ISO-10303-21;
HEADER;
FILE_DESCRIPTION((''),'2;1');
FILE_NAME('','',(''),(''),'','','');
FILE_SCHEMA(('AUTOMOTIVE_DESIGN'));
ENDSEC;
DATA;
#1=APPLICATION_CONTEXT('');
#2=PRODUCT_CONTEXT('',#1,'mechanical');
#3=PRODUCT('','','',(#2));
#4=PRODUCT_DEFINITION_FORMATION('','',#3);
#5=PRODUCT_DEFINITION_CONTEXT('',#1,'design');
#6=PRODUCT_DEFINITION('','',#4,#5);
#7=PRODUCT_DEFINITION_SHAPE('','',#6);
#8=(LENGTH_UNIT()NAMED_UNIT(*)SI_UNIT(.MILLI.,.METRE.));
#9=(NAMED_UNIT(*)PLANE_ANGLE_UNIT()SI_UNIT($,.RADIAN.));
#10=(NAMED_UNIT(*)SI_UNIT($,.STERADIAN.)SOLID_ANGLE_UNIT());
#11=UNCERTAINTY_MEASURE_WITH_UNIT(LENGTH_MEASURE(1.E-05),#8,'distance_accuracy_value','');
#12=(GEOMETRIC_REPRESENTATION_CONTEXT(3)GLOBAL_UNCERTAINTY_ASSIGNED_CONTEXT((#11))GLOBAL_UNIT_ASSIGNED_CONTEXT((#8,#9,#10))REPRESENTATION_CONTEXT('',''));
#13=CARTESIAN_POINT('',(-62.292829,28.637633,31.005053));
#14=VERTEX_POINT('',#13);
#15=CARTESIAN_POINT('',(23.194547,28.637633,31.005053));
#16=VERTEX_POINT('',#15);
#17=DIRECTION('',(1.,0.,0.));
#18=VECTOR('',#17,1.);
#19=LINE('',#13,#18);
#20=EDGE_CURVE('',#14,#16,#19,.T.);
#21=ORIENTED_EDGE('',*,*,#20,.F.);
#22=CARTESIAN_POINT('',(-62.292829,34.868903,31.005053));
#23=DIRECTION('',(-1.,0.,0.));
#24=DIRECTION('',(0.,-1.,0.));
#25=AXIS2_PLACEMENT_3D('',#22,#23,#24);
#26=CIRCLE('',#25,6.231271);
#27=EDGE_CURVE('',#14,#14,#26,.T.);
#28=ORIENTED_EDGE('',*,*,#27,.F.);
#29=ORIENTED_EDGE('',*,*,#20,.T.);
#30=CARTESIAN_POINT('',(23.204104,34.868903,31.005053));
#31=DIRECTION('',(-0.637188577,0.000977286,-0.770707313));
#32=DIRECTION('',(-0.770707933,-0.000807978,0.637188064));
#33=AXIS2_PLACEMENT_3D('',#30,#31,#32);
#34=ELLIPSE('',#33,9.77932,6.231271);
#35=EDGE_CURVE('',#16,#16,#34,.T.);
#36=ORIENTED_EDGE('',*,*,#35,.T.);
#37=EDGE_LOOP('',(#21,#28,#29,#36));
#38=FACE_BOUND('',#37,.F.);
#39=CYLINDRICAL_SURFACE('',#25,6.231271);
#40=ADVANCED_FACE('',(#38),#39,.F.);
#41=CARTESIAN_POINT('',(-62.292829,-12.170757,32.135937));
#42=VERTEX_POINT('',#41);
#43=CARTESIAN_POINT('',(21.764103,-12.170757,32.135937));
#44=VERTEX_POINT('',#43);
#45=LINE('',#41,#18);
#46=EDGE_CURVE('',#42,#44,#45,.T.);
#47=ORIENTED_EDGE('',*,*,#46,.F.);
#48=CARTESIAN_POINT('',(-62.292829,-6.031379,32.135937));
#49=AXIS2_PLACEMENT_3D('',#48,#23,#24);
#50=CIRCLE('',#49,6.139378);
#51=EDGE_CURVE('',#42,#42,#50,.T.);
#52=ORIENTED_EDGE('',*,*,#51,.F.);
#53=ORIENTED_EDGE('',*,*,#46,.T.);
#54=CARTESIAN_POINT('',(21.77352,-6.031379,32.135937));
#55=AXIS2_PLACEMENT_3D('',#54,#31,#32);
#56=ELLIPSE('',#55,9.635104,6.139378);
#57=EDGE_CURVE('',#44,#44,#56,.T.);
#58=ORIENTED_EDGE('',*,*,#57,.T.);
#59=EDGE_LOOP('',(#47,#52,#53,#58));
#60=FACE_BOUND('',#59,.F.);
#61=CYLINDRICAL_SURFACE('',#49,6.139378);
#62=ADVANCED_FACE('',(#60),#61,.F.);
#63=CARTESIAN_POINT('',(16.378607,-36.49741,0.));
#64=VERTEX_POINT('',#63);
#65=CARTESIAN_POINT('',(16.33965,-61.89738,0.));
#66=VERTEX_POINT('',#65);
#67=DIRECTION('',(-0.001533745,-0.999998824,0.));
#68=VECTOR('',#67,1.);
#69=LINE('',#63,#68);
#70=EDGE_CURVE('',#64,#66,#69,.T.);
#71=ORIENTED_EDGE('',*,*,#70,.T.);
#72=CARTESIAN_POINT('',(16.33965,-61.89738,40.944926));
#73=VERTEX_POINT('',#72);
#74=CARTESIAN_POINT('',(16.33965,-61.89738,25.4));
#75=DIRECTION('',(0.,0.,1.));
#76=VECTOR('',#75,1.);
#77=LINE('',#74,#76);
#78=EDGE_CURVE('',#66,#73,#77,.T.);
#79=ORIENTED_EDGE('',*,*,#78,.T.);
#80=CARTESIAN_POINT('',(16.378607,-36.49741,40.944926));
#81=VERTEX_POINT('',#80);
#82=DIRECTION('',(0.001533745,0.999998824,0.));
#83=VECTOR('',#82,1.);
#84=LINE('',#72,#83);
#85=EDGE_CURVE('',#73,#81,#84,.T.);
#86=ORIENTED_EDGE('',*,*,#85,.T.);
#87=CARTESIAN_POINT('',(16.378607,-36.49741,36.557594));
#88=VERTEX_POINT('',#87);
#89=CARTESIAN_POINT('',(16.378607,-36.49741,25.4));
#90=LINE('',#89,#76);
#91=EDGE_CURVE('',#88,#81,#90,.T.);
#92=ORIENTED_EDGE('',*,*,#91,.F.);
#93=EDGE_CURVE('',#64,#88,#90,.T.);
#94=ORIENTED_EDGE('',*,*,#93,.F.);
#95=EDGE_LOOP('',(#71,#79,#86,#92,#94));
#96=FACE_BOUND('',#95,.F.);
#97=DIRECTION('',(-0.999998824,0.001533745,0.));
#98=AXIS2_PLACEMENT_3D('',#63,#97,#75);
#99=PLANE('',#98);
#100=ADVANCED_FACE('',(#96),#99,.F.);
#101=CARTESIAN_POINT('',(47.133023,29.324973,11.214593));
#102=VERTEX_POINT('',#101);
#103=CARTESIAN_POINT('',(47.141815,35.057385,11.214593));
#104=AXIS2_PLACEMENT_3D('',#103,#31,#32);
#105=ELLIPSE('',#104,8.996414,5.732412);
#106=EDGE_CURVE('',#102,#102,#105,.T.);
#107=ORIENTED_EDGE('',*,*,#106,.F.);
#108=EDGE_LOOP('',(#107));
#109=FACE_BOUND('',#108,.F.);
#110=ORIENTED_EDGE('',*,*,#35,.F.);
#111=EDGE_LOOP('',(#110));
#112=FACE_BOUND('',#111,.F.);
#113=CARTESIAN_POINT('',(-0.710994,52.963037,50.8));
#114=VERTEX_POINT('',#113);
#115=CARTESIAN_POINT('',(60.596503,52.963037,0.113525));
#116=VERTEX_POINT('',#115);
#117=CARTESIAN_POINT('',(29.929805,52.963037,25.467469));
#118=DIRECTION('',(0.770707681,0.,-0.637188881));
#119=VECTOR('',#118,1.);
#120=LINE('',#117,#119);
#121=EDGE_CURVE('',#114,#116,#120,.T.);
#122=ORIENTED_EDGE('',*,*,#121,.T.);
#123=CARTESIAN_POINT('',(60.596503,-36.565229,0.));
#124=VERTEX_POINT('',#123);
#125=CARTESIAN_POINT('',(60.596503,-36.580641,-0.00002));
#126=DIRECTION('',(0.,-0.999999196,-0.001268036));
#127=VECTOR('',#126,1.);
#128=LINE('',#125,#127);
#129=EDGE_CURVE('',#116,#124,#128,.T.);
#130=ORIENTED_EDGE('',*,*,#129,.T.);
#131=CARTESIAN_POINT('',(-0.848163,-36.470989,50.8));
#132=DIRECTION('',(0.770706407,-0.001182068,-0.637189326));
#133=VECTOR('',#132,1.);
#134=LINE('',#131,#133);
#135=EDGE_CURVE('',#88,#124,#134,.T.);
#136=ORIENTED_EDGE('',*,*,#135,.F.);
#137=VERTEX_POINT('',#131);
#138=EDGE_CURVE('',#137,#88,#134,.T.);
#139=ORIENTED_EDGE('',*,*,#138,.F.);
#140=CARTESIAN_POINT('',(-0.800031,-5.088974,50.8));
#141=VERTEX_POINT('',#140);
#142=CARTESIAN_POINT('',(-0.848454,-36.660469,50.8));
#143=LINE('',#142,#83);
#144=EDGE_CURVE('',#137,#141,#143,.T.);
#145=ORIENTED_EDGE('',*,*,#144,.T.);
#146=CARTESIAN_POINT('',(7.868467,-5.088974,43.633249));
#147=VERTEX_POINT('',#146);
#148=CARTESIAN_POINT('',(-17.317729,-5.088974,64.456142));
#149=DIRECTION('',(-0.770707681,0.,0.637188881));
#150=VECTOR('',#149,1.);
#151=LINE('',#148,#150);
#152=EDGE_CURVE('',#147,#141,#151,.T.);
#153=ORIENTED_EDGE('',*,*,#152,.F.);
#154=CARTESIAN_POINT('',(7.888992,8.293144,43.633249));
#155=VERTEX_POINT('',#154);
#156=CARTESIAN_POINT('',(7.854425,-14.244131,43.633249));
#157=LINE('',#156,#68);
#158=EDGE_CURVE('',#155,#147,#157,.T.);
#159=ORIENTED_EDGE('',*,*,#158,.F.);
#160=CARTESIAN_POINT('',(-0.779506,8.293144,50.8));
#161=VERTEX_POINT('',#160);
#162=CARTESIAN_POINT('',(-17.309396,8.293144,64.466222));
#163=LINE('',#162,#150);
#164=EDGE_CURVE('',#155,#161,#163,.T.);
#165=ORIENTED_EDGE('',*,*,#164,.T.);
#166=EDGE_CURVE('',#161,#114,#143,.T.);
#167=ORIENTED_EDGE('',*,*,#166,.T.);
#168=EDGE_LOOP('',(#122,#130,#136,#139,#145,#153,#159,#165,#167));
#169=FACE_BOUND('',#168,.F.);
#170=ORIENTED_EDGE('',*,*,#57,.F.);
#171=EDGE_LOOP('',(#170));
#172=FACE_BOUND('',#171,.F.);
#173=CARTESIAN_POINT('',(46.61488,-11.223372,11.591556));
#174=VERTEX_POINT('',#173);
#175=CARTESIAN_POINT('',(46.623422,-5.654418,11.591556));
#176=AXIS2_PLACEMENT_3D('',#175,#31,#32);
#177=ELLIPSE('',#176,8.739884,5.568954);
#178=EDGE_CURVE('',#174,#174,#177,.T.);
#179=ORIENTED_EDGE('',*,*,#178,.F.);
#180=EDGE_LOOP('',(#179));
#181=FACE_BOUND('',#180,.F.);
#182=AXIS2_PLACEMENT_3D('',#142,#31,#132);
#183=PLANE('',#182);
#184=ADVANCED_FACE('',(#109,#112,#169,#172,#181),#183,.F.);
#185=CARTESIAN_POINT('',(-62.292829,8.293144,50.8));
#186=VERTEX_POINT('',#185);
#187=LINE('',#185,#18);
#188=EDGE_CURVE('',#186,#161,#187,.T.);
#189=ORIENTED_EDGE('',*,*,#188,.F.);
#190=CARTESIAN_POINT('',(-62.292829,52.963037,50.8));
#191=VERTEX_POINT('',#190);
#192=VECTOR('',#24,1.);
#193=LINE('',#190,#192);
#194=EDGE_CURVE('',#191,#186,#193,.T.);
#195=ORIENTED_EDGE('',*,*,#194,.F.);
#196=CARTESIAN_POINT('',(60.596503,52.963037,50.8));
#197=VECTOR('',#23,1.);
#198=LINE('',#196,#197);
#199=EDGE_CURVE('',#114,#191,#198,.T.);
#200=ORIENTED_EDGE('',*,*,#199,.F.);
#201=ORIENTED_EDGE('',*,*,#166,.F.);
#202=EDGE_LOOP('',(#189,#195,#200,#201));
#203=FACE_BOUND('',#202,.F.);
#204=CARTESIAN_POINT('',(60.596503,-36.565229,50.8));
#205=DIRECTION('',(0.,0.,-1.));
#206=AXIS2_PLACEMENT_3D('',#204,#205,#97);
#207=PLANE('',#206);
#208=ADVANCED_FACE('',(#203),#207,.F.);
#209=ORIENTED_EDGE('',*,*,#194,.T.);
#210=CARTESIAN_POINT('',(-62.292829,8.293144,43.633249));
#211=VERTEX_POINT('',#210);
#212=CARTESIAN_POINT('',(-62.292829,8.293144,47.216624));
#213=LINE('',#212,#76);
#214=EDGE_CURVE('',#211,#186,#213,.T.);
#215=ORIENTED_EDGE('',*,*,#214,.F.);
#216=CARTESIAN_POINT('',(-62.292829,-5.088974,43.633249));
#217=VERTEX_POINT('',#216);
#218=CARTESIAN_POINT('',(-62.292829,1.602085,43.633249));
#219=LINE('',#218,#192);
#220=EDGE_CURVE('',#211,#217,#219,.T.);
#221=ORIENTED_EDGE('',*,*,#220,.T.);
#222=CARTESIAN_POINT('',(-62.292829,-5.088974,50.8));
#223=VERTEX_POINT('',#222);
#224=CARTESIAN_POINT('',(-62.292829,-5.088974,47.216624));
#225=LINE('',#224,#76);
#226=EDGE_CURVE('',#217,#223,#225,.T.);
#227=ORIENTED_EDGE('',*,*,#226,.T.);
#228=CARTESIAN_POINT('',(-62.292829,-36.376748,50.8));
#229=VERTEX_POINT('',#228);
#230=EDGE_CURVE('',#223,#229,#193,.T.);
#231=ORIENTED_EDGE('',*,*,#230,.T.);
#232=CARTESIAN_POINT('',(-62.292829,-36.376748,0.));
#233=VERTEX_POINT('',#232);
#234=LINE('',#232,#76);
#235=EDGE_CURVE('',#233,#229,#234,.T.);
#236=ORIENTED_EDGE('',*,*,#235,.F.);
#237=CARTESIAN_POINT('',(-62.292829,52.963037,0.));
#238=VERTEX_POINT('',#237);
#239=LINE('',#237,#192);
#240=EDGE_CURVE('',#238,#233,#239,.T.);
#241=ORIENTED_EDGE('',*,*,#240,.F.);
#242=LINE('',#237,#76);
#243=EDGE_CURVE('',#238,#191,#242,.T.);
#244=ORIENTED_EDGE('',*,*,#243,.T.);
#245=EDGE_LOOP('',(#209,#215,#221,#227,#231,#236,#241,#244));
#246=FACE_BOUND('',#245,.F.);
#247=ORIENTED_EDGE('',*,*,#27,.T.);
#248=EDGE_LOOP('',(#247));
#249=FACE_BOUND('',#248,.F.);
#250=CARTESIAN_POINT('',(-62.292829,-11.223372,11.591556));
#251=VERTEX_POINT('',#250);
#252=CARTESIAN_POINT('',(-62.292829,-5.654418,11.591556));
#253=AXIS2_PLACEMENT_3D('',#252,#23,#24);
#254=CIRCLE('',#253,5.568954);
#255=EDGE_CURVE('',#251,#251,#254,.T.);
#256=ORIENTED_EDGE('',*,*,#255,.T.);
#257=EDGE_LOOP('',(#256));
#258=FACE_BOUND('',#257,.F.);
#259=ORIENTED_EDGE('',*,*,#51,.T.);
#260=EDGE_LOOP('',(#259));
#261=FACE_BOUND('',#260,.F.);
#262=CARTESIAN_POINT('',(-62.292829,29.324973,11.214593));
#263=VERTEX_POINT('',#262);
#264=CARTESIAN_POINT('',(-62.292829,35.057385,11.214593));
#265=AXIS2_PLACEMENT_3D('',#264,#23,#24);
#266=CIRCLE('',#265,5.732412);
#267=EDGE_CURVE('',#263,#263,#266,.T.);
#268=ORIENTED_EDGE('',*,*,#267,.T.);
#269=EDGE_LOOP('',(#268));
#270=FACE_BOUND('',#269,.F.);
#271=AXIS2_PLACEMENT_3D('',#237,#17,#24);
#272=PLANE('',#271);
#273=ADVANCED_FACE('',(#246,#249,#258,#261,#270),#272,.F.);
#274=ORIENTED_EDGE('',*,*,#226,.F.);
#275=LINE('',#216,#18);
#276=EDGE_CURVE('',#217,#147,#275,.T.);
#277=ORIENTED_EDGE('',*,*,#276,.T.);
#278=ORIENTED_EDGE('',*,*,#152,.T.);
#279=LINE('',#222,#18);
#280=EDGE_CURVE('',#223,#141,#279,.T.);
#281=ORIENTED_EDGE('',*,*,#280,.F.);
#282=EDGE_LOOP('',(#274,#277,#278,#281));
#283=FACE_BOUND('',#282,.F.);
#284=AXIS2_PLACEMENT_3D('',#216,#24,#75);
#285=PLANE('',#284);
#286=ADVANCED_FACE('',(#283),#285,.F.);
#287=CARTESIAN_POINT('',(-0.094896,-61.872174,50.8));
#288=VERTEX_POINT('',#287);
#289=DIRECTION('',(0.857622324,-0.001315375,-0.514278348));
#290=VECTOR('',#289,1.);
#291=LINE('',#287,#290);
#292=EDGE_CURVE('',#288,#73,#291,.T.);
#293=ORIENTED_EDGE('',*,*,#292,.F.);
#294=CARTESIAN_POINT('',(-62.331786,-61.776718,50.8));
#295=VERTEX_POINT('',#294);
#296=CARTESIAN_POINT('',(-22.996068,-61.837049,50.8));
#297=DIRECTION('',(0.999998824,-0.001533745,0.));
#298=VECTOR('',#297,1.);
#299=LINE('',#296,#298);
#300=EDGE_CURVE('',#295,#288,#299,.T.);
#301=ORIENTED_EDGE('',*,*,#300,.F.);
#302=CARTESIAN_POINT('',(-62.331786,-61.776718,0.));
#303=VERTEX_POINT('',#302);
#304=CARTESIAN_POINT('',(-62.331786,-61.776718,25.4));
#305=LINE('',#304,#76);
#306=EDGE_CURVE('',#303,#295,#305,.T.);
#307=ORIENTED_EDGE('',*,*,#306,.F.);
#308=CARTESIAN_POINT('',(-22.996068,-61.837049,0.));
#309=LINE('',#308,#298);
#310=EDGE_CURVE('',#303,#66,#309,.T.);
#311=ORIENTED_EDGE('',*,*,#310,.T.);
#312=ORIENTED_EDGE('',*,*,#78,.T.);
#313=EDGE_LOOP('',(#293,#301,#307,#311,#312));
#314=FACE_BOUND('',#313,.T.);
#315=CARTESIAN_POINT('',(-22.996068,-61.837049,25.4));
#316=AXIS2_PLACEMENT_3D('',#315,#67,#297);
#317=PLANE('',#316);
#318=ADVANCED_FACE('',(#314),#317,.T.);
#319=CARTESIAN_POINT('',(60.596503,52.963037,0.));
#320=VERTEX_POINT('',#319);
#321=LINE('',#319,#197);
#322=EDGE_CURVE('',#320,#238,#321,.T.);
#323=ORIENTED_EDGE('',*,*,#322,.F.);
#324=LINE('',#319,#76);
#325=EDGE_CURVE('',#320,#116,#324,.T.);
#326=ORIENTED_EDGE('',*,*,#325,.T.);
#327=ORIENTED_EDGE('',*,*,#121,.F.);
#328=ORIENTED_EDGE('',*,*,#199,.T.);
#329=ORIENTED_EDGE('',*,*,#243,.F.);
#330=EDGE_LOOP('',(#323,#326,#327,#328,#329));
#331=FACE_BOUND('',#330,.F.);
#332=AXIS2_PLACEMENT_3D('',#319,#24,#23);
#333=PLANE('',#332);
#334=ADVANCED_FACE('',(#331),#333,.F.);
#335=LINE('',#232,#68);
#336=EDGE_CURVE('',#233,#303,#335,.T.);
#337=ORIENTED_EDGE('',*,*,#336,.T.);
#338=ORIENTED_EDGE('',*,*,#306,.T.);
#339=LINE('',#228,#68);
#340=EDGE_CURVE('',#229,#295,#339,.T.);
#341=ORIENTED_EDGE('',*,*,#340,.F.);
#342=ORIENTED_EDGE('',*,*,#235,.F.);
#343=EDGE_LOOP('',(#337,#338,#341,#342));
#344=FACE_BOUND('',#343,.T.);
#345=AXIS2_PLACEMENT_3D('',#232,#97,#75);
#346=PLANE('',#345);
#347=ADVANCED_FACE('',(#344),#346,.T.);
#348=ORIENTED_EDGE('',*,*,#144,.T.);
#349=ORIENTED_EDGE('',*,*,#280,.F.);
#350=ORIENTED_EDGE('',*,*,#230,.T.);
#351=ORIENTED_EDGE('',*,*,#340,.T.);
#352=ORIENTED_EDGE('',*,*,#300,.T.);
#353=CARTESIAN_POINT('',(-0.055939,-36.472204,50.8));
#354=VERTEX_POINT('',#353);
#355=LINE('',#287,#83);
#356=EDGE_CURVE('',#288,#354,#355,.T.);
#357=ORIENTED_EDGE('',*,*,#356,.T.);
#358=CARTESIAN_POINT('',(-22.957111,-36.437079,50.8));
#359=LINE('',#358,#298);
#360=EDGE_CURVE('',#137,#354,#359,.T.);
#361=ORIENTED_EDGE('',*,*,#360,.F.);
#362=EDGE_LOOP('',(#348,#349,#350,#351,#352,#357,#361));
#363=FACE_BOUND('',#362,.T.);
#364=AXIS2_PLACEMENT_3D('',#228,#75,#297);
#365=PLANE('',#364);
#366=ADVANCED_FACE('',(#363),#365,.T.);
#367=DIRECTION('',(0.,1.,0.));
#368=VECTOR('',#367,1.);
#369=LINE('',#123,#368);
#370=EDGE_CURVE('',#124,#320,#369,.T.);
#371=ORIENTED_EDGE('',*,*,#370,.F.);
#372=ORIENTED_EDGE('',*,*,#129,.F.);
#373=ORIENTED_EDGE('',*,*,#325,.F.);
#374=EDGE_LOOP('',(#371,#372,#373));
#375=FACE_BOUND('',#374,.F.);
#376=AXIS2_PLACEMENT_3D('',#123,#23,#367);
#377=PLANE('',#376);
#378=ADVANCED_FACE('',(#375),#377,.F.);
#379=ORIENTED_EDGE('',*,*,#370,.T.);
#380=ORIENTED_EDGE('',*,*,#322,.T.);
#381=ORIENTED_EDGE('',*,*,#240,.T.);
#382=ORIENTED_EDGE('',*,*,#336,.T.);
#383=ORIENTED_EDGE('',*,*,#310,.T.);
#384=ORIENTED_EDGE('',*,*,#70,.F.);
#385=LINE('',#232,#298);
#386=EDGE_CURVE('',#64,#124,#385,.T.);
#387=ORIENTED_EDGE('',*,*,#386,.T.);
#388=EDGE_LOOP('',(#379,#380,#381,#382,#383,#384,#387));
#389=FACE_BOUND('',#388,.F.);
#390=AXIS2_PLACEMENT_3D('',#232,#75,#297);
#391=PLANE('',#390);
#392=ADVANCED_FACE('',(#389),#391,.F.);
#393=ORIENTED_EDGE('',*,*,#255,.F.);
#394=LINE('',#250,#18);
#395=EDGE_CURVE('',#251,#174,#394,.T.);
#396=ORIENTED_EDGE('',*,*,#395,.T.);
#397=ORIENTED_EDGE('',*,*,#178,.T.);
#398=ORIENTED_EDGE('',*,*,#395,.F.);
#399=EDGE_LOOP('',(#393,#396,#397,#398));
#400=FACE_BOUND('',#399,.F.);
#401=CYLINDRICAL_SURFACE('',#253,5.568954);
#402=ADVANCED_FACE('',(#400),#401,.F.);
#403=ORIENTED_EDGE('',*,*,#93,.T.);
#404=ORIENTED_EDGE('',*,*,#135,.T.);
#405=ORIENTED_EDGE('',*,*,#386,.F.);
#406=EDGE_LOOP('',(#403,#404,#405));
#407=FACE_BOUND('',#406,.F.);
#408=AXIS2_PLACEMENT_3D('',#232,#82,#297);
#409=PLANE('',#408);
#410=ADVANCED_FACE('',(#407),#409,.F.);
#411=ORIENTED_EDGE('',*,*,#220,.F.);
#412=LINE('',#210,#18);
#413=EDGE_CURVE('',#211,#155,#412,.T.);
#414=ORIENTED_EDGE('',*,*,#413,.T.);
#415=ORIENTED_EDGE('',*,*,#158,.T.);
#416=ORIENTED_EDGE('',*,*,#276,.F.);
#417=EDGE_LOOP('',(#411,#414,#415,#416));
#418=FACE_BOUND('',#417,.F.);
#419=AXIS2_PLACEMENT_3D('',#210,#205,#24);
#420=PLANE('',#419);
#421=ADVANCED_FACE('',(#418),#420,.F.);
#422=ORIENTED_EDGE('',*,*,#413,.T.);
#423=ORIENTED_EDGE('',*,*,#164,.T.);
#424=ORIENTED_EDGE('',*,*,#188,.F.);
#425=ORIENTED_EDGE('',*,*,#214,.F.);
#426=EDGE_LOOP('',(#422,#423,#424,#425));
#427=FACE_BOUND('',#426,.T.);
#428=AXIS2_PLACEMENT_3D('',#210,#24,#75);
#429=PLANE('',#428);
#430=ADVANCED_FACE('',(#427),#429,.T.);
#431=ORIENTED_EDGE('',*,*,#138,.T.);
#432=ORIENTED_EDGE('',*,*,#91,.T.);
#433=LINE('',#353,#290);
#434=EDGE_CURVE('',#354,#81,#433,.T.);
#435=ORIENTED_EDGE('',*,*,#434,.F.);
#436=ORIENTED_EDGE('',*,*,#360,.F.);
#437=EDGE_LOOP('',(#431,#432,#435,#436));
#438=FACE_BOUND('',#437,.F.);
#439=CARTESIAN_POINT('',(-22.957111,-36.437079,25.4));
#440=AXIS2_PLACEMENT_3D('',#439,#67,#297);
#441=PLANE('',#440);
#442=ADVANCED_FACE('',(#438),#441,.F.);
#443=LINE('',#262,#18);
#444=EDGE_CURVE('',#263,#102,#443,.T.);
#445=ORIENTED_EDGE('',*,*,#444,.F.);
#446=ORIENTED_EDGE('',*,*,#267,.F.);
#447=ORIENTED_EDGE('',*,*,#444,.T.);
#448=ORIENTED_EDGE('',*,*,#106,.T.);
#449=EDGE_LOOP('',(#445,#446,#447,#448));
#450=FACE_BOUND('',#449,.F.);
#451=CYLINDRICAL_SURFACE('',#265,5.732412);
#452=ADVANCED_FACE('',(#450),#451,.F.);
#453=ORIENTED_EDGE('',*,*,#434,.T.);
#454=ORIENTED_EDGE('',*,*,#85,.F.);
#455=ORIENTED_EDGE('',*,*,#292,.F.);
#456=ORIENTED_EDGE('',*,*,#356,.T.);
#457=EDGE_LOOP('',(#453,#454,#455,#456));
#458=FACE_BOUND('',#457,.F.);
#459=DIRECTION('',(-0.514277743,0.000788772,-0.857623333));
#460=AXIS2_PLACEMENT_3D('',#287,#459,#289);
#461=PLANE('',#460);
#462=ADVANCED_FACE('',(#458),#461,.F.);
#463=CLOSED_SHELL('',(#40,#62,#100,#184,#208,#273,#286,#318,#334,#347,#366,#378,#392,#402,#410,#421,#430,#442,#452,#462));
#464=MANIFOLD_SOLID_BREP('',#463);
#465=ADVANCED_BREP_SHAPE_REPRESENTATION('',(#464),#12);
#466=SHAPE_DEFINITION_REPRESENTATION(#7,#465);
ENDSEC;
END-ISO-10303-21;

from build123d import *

# Parameters (mm, degrees)
F1_DEPTH  = 50.8
F3_DEPTH  = 0.189480841
F4_DEPTH  = 89.7186418795
F5_W      = 13.382118661
F5_H      = 7.166751343
F6_DEPTH  = 122.8903324733
F7_W      = 78.6715284359
F7_H      = 50.8
F8_DEPTH  = 25.4
F10_DEPTH = 25.4
F11_R     = 6.2312707334
F12_DEPTH = 122.8903324733
F13_R     = 6.1393781486
F14_DEPTH = 122.8903324733
F15_R     = 5.7324119576
F16_DEPTH = 122.8903324733
F17_R     = 5.5689542342
F18_DEPTH = 122.8903324733


with BuildPart() as f1:
    # F0 (on Top) → F1 (new body)
    with BuildSketch(Plane.XY):
        Polygon((-62.2928291559, 52.9630370438), (-62.2928291559, -36.376748234), (60.5965033174, -36.5652292967), (60.5965033174, 52.9630370438), align=None)
    extrude(amount=F1_DEPTH)

    # F2 (on face) → F3 (join, through all)
    with BuildSketch(Plane(origin=(-0.0559391088, -36.4722038357, 0), x_dir=(0.9999988238, -0.0015337445, 0), z_dir=(-0.0015337445, -0.9999988238, 0))):
        Polygon((60.6525137648, 50.8), (-0.7922247423, 50.8), (60.6525137648, 0), align=None)
    extrude(amount=F3_DEPTH)

    # F4 (cut, through all): a face of the model
    f4_faces = [f1.faces().sort_by_distance(p)[0] for p in [
        (40.1146572899, -36.7232964043, 33.8666666667),
    ]]
    extrude(f4_faces, amount=-F4_DEPTH, mode=Mode.SUBTRACT)

    # F5 (on face) → F6 (cut, through all)
    with BuildSketch(Plane(origin=(-62.2928291559, 0, 0), x_dir=(0, -1, 0), z_dir=(-1, 0, 0))):
        with Locations((-1.6020850744, 47.2166243285)):
            Rectangle(F5_W, F5_H)
    extrude(amount=-F6_DEPTH, mode=Mode.SUBTRACT)

    # F7 (on face) → F8 (join)
    with BuildSketch(Plane(origin=(-0.0559391088, -36.4722038357, 0), x_dir=(0.9999988238, -0.0015337445, 0), z_dir=(-0.0015337445, -0.9999988238, 0))):
        with Locations((-22.9011990315, 25.4)):
            Rectangle(F7_W, F7_H)
    extrude(amount=F8_DEPTH)

    # F9 (on face) → F10 (cut)
    with BuildSketch(Plane(origin=(-0.0948962197, -61.8721739606, 0), x_dir=(0.9999988238, -0.0015337445, 0), z_dir=(-0.0015337445, -0.9999988238, 0))):
        Polygon((16.4345651865, 50.8), (0, 50.8), (16.4345651865, 40.9449264407), align=None)
    extrude(amount=-F10_DEPTH, mode=Mode.SUBTRACT)

    # F11 (on face) → F12 (cut, through all)
    with BuildSketch(Plane(origin=(-62.2928291559, 0, 0), x_dir=(0, -1, 0), z_dir=(-1, 0, 0))):
        with Locations((-34.8689034581, 31.0050528497)):
            Circle(F11_R)
    extrude(amount=-F12_DEPTH, mode=Mode.SUBTRACT)

    # F13 (on face) → F14 (cut, through all)
    with BuildSketch(Plane(origin=(-62.2928291559, 0, 0), x_dir=(0, -1, 0), z_dir=(-1, 0, 0))):
        with Locations((6.031378638, 32.1359373629)):
            Circle(F13_R)
    extrude(amount=-F14_DEPTH, mode=Mode.SUBTRACT)

    # F15 (on face) → F16 (cut, through all)
    with BuildSketch(Plane(origin=(-62.2928291559, 0, 0), x_dir=(0, -1, 0), z_dir=(-1, 0, 0))):
        with Locations((-35.0573845208, 11.2145934254)):
            Circle(F15_R)
    extrude(amount=-F16_DEPTH, mode=Mode.SUBTRACT)

    # F17 (on face) → F18 (cut, through all)
    with BuildSketch(Plane(origin=(-62.2928291559, 0, 0), x_dir=(0, -1, 0), z_dir=(-1, 0, 0))):
        with Locations((5.6544179097, 11.5915555507)):
            Circle(F17_R)
    extrude(amount=-F18_DEPTH, mode=Mode.SUBTRACT)


solid = f1.part
